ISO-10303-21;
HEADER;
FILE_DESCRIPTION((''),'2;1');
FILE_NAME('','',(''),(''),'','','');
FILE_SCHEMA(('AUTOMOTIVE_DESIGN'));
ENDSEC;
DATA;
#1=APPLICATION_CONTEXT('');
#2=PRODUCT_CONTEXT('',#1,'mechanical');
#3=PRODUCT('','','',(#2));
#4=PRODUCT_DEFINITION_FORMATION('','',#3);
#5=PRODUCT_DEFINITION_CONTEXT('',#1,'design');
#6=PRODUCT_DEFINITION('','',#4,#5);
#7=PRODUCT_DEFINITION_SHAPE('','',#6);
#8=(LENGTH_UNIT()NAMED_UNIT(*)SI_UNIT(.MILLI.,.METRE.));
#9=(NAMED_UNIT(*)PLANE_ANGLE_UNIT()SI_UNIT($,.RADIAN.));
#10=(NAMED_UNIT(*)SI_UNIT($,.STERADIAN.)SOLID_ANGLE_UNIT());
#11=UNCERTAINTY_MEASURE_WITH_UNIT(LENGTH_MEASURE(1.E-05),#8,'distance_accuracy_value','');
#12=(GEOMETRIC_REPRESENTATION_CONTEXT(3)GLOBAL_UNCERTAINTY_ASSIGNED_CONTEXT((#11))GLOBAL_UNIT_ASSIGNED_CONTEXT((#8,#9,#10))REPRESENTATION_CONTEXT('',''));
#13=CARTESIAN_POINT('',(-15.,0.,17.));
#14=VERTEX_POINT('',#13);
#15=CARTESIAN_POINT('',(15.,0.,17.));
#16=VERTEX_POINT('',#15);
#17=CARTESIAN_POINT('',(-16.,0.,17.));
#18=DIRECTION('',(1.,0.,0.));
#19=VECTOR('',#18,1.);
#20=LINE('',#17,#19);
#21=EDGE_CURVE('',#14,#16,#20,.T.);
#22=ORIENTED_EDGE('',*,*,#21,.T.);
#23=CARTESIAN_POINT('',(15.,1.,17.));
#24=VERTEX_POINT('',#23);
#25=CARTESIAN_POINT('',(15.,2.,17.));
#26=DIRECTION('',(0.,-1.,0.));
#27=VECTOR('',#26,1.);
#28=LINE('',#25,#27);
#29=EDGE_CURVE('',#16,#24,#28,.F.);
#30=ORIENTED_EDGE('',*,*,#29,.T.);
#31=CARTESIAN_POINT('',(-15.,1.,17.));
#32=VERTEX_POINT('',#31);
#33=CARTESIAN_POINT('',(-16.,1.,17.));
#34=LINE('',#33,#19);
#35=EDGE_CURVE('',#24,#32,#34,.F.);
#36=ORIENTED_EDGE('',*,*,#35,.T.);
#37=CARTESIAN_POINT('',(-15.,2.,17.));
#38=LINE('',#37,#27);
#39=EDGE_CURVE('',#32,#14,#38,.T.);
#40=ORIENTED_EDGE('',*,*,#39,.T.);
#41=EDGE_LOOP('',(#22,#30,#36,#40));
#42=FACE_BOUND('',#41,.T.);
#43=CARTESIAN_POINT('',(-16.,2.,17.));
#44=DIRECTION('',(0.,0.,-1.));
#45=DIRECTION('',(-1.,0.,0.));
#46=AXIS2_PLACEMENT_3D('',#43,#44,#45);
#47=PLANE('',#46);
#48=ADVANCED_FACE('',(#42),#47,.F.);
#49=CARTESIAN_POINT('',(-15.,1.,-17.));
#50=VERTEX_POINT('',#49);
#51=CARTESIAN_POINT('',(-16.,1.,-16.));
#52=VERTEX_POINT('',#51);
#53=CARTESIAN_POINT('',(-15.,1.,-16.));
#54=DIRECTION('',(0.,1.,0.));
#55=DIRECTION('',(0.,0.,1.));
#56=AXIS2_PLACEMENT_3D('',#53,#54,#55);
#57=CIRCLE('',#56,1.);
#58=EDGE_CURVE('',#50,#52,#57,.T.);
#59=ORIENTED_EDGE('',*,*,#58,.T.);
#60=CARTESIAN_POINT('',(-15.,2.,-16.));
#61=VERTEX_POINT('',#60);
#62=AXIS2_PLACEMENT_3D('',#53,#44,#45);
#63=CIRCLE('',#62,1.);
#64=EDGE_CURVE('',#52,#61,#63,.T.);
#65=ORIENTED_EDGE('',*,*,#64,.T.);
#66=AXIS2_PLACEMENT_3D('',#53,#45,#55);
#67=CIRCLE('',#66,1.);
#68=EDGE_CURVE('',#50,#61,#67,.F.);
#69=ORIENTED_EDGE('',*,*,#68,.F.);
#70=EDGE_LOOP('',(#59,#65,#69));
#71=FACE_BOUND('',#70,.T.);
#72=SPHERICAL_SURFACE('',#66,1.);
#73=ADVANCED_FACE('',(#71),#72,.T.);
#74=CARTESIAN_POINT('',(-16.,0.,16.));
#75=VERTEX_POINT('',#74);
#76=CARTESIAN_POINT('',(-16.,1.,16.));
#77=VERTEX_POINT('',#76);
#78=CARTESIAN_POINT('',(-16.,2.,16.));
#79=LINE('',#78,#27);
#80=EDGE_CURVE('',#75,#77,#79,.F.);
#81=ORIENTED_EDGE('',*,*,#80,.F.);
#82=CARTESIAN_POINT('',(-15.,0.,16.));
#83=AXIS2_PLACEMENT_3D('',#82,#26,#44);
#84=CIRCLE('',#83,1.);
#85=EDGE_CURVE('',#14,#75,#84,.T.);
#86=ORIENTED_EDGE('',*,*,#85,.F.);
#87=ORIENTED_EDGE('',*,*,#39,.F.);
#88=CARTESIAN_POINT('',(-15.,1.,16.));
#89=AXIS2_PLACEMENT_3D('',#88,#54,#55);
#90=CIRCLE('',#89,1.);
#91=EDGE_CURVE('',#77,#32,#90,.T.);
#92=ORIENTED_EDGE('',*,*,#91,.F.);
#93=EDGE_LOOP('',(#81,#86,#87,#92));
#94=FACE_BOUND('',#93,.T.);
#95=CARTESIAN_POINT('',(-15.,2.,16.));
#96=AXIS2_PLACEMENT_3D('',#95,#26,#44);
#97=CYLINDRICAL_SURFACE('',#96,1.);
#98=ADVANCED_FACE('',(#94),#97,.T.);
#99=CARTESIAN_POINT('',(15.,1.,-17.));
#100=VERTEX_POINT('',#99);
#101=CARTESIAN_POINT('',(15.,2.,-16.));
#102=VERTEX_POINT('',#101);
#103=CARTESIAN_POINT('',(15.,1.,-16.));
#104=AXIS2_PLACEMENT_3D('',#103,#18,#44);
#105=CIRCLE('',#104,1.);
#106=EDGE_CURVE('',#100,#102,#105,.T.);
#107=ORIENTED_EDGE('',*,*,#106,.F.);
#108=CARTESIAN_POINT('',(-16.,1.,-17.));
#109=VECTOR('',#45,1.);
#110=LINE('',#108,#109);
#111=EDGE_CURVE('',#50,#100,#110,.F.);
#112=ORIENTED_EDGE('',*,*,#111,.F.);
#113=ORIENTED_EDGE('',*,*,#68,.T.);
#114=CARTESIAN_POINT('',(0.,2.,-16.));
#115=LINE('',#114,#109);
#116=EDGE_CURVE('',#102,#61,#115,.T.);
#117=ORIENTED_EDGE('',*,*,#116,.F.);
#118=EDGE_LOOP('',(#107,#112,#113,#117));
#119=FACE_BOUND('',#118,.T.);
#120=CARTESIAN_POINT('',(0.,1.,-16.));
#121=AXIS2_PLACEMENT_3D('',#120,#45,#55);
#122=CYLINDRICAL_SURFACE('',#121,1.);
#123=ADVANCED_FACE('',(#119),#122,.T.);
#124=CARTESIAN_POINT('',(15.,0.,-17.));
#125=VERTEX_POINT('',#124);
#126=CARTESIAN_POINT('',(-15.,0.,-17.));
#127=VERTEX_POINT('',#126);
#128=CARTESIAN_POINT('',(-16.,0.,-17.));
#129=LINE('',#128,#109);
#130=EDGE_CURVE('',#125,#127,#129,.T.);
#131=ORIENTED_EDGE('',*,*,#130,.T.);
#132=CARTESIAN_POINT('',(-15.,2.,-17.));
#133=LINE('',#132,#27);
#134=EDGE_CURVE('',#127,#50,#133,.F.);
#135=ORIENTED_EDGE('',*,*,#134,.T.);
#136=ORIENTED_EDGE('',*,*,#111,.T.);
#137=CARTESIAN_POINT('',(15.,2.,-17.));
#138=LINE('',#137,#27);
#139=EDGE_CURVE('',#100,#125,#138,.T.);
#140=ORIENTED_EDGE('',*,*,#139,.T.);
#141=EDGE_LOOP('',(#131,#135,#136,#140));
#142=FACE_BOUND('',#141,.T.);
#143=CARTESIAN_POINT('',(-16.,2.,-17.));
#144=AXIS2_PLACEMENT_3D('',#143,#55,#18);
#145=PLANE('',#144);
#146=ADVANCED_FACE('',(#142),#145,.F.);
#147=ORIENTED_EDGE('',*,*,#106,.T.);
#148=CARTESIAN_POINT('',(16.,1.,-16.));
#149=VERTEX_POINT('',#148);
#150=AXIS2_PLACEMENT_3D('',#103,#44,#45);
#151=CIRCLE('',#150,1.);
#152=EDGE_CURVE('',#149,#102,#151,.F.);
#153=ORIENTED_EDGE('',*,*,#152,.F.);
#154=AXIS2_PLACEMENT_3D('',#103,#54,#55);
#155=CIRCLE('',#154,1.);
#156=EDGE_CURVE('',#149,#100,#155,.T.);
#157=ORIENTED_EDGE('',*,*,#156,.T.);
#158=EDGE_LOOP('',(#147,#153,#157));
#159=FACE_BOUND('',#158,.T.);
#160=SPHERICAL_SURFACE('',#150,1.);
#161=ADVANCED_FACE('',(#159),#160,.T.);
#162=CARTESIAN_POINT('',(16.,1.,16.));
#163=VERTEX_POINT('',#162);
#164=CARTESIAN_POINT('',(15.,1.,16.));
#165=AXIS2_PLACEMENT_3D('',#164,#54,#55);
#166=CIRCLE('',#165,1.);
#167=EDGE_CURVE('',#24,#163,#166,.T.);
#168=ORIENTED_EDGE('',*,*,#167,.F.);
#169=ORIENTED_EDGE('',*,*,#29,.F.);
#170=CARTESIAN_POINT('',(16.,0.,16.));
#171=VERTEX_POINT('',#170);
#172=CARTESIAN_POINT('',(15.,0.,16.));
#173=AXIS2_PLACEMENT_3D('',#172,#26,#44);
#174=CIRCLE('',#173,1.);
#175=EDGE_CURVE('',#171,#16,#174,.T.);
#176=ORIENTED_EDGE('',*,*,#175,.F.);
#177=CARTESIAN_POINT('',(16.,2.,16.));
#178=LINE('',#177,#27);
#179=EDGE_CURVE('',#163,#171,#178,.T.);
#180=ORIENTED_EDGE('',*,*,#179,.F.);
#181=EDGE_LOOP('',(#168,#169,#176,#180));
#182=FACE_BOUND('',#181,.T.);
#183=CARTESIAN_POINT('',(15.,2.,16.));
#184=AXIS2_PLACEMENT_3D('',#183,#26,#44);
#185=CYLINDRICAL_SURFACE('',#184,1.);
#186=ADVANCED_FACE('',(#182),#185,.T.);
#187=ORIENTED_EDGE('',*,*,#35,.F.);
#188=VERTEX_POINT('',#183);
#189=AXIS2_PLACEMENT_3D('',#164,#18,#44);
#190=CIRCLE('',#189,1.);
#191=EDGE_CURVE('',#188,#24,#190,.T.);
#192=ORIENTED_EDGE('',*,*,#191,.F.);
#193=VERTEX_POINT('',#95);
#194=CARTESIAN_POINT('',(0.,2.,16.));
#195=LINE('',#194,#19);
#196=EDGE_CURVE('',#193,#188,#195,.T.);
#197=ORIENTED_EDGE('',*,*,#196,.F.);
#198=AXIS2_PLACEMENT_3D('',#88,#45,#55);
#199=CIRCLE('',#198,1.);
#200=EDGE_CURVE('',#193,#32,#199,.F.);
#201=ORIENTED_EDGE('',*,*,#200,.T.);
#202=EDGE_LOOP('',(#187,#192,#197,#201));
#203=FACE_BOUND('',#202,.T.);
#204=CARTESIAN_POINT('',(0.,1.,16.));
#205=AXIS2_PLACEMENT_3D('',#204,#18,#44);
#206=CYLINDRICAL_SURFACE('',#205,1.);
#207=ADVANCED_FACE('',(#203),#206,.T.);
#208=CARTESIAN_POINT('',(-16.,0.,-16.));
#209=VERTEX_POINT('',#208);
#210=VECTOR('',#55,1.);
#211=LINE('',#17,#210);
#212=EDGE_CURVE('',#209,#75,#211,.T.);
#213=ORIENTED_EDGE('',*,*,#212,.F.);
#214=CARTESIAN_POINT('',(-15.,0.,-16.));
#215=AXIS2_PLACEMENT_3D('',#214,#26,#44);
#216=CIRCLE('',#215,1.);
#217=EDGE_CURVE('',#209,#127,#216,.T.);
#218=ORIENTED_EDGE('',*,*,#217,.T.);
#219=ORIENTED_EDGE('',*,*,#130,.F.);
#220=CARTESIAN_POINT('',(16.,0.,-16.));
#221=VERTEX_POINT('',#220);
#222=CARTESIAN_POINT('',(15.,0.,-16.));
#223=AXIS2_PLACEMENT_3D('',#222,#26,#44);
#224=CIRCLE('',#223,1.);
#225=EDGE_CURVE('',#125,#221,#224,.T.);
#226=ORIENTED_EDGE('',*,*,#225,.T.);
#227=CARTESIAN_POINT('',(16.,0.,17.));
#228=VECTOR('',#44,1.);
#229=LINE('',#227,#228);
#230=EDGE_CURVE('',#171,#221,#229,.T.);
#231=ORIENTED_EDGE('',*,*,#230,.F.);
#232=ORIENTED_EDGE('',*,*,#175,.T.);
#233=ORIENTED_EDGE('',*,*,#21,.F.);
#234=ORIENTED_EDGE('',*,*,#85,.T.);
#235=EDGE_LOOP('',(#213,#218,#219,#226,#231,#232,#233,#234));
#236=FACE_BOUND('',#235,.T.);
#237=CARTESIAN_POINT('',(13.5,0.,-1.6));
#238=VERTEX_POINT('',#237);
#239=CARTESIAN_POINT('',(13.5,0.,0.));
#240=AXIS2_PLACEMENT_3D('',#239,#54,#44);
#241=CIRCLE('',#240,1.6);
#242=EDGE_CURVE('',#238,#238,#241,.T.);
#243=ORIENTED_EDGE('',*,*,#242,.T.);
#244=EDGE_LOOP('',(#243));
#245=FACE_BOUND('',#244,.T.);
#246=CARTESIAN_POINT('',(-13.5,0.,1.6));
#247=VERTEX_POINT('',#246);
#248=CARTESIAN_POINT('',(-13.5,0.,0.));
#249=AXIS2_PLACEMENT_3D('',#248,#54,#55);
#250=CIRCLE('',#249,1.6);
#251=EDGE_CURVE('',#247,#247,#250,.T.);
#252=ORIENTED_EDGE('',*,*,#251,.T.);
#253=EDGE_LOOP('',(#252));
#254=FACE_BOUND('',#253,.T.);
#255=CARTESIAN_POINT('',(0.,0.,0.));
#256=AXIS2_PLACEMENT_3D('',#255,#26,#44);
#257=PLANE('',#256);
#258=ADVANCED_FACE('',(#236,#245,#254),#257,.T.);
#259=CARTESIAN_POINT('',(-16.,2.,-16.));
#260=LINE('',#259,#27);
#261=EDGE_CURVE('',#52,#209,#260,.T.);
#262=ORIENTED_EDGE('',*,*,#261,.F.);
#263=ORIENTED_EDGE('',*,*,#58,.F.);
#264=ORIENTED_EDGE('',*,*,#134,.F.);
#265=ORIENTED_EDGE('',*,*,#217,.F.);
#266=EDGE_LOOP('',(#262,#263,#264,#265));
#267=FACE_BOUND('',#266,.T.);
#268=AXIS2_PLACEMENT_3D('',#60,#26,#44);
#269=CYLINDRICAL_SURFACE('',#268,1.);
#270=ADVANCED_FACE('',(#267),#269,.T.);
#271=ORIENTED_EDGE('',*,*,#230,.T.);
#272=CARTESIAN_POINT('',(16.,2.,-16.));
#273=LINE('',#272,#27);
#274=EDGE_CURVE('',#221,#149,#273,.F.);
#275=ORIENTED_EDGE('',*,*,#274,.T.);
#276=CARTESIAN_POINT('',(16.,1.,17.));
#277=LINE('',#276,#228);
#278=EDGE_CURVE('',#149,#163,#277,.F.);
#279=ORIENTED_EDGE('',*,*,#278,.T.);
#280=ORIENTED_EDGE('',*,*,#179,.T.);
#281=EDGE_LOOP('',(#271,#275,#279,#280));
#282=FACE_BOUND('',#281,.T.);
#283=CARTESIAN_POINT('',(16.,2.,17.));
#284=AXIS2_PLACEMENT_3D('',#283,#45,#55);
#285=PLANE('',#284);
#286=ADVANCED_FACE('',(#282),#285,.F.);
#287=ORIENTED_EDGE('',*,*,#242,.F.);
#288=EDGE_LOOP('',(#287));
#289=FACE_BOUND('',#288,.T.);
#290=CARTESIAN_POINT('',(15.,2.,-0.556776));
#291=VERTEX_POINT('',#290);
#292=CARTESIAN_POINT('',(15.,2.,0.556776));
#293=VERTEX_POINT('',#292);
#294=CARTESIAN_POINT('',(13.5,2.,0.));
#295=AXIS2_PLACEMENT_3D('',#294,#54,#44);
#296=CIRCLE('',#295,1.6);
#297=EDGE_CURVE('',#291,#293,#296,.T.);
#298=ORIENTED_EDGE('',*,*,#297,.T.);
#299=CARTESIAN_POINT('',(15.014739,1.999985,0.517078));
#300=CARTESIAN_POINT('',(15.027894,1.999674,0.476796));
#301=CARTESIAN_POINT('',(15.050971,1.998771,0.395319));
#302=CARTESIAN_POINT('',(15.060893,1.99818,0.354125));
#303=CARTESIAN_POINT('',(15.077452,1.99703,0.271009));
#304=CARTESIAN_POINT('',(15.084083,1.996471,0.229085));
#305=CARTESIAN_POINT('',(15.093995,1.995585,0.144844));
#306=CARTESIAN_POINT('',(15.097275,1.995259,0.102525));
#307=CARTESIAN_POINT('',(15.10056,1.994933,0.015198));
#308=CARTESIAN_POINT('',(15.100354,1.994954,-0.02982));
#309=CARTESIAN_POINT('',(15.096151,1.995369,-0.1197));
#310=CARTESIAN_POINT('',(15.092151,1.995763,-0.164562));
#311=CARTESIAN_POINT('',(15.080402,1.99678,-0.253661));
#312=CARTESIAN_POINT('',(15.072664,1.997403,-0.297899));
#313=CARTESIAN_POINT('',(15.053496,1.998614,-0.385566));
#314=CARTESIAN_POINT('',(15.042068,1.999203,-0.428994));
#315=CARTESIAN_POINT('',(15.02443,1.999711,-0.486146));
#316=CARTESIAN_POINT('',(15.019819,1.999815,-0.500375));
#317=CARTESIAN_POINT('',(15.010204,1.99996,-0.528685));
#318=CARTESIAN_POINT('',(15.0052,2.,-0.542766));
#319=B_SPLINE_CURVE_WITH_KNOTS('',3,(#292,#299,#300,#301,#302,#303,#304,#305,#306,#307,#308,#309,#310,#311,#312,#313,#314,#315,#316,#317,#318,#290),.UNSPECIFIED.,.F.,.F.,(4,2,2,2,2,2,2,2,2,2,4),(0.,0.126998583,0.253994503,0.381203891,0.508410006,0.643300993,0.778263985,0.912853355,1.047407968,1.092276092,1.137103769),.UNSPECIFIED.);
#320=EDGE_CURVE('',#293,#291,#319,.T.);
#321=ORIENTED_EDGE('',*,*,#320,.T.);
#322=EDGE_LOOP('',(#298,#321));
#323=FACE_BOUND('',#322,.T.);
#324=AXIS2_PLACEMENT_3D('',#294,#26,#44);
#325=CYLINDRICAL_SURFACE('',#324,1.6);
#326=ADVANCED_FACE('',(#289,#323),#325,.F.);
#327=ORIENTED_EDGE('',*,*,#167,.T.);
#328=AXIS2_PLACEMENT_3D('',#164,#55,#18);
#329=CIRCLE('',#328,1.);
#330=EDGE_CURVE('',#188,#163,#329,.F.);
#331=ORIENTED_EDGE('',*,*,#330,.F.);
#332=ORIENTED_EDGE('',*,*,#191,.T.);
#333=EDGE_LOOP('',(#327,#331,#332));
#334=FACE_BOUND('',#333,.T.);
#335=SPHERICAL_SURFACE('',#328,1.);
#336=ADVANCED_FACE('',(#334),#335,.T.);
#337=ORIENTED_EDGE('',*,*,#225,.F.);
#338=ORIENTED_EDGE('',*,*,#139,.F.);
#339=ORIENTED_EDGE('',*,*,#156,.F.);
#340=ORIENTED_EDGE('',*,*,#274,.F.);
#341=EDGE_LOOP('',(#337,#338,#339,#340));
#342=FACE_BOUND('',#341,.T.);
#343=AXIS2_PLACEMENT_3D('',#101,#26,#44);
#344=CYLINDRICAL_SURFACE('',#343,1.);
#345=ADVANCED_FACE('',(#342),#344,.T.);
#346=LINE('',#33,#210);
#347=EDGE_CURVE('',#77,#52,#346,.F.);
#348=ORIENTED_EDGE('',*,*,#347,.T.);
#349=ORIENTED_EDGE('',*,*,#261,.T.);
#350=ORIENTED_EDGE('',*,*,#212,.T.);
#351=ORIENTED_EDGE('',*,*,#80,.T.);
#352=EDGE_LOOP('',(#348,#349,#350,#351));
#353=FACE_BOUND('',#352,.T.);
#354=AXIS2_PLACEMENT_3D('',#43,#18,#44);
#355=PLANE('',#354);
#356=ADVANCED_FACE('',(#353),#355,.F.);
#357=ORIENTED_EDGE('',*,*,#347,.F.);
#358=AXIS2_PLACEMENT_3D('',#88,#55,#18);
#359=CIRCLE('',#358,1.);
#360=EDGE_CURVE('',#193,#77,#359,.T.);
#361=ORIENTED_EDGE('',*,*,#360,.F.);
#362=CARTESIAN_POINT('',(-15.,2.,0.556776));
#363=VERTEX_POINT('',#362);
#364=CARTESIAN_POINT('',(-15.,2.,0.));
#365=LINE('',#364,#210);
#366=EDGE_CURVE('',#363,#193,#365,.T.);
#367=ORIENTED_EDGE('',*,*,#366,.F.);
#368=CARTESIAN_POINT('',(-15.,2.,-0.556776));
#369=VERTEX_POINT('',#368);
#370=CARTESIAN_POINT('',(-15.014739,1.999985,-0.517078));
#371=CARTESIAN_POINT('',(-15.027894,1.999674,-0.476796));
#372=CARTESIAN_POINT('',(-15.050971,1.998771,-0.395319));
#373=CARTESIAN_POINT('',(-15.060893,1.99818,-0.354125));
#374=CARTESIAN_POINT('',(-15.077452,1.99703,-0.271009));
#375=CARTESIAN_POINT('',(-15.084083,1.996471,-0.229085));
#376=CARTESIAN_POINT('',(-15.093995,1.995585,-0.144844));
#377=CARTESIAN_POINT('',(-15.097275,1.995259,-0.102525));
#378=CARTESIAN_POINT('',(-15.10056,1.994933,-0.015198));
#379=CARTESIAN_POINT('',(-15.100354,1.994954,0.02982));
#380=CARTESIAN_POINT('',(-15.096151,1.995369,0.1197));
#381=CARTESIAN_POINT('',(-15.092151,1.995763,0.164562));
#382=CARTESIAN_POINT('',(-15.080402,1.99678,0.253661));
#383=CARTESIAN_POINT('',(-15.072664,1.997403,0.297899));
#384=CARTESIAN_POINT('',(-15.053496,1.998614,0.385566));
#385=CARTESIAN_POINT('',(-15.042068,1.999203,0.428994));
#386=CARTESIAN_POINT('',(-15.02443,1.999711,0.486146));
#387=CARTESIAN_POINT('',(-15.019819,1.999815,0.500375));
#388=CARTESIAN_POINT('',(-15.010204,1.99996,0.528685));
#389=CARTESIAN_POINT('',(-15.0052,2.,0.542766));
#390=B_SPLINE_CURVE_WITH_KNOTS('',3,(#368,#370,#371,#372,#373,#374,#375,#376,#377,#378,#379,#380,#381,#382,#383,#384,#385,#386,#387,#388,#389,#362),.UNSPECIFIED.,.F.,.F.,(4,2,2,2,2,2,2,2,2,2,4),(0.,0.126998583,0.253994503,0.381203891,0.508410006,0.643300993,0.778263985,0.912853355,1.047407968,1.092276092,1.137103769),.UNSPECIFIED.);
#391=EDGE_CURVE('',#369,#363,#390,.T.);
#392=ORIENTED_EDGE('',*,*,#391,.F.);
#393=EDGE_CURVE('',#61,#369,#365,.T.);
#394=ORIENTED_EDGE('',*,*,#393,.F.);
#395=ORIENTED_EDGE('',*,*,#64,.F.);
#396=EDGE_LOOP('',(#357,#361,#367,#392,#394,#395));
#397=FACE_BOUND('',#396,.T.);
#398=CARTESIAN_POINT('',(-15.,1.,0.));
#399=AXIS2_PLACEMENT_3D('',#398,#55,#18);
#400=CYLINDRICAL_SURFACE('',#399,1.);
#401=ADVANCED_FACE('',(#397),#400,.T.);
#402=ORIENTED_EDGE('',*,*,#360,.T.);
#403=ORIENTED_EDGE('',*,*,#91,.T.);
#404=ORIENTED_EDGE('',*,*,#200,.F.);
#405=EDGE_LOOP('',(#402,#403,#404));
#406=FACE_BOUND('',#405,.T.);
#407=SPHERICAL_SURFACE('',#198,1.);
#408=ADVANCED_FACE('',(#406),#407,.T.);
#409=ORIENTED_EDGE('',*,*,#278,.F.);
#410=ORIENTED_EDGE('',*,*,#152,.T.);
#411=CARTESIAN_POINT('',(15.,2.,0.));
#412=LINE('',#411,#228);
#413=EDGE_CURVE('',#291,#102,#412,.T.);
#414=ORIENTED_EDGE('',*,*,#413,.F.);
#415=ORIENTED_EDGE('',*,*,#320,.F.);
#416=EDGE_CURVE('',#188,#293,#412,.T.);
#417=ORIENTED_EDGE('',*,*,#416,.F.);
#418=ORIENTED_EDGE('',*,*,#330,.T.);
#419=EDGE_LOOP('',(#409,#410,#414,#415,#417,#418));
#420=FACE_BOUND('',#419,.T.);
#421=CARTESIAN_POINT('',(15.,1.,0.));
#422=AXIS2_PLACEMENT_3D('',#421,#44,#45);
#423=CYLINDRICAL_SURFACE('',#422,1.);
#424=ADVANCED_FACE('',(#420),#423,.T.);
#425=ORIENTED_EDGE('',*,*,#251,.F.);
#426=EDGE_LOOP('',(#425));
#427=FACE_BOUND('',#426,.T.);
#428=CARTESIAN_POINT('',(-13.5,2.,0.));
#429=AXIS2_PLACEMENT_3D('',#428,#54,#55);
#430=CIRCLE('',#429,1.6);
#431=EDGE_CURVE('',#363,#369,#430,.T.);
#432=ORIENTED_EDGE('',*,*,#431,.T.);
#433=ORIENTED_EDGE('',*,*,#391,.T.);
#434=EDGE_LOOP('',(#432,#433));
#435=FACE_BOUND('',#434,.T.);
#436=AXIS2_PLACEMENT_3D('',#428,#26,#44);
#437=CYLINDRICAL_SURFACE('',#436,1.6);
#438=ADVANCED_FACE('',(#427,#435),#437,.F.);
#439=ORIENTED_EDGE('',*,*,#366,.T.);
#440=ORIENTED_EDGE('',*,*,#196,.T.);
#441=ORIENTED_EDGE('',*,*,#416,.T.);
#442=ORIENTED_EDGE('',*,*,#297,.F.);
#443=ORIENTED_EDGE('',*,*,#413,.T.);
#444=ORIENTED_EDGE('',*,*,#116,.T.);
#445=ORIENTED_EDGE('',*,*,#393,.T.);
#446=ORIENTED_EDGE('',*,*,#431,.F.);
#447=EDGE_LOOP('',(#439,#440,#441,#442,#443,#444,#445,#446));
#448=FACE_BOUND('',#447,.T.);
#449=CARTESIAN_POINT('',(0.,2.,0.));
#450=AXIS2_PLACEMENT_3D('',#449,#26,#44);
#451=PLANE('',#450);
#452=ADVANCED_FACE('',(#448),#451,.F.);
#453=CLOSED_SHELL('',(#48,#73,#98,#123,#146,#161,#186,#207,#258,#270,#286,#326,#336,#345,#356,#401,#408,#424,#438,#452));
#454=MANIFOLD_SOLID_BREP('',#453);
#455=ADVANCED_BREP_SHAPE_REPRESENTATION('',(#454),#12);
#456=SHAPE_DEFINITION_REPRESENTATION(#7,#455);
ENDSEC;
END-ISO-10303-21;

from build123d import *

# Parameters (mm, degrees)
SKETCH2_W           = 32
SKETCH2_H           = 34
SKETCH2_R           = 1.6
BOSS_EXTRUDE1_DEPTH = 2
FILLET1_R           = 1


with BuildPart() as part:
    # Sketch2 → Boss-Extrude1 (new body)
    with BuildSketch(Plane(origin=(0, 0, 0), x_dir=(1, 0, 0), z_dir=(0, 1, 0))):
        Rectangle(SKETCH2_W, SKETCH2_H)
        with Locations(Location((-13.5, 0, 0), (0, 0, 270))):
            Circle(SKETCH2_R, mode=Mode.SUBTRACT)
        with Locations(Location((13.5, 0, 0), (0, 0, 90))):
            Circle(SKETCH2_R, mode=Mode.SUBTRACT)
    extrude(amount=BOSS_EXTRUDE1_DEPTH)

    # Fillet1
    # the kernel refuses this fillet: 1 mm, written as the material it takes off along each edge
    with BuildSketch(Plane(origin=(-15, 1, -16), x_dir=(-1, 0, 0), z_dir=(0, 0, -1))) as fillet1_piece_1_section:
        Polygon((0, 0), (FILLET1_R, 0), (FILLET1_R, FILLET1_R), (0, FILLET1_R), align=None)
    fillet1_piece_1 = extrude(amount=FILLET1_R, mode=Mode.PRIVATE)
    fillet1_piece_1 = fillet1_piece_1 - Plane(origin=(-15, 1, -16), x_dir=(0.7071067811865475, -0.7071067811865475, 0), z_dir=(0, 0, -1)) * Sphere(FILLET1_R, mode=Mode.PRIVATE)
    add(fillet1_piece_1, mode=Mode.SUBTRACT)
    with BuildSketch(Plane(origin=(-15, 1, 16), x_dir=(-1, 0, 0), z_dir=(0, 0, 1))) as fillet1_piece_2_section:
        Polygon((0, 0), (FILLET1_R, 0), (FILLET1_R, -FILLET1_R), (0, -FILLET1_R), align=None)
    fillet1_piece_2 = extrude(amount=FILLET1_R, mode=Mode.PRIVATE)
    fillet1_piece_2 = fillet1_piece_2 - Plane(origin=(-15, 1, 16), x_dir=(0.7071067811865475, -0.7071067811865475, 0), z_dir=(0, 0, 1)) * Sphere(FILLET1_R, mode=Mode.PRIVATE)
    add(fillet1_piece_2, mode=Mode.SUBTRACT)
    with BuildSketch(Plane(origin=(15, 1, 16), x_dir=(1, 0, 0), z_dir=(0, 0, 1))) as fillet1_piece_3_section:
        Polygon((0, 0), (FILLET1_R, 0), (FILLET1_R, FILLET1_R), (0, FILLET1_R), align=None)
    fillet1_piece_3 = extrude(amount=FILLET1_R, mode=Mode.PRIVATE)
    fillet1_piece_3 = fillet1_piece_3 - Plane(origin=(15, 1, 16), x_dir=(-0.7071067811865475, -0.7071067811865475, 0), z_dir=(0, 0, 1)) * Sphere(FILLET1_R, mode=Mode.PRIVATE)
    add(fillet1_piece_3, mode=Mode.SUBTRACT)
    with BuildSketch(Plane(origin=(15, 1, -16), x_dir=(0, 0, -1), z_dir=(1, 0, 0))) as fillet1_piece_4_section:
        Polygon((0, 0), (FILLET1_R, 0), (FILLET1_R, FILLET1_R), (0, FILLET1_R), align=None)
    fillet1_piece_4 = extrude(amount=FILLET1_R, mode=Mode.PRIVATE)
    fillet1_piece_4 = fillet1_piece_4 - Plane(origin=(15, 1, -16), x_dir=(0, -0.7071067811865475, 0.7071067811865475), z_dir=(1, 0, 0)) * Sphere(FILLET1_R, mode=Mode.PRIVATE)
    add(fillet1_piece_4, mode=Mode.SUBTRACT)
    with BuildSketch(Plane(origin=(-16, 2, -16), x_dir=(0, -1, 0), z_dir=(0, 0, 1)), Plane(origin=(16, 2, 16), x_dir=(0, -1, 0), z_dir=(0, 0, -1))) as fillet1_piece_5:
        with BuildLine():
            CenterArc((FILLET1_R, FILLET1_R), FILLET1_R, 180, 90)
            Line((0, FILLET1_R), (0, 0))
            Line((0, 0), (FILLET1_R, 0))
        make_face()
    extrude(amount=32, mode=Mode.SUBTRACT)
    with BuildSketch(Plane(origin=(-15, 2, 17), x_dir=(0, -1, 0), z_dir=(1, 0, 0)), Plane(origin=(15, 2, -17), x_dir=(0, -1, 0), z_dir=(-1, 0, 0))) as fillet1_piece_6:
        with BuildLine():
            CenterArc((FILLET1_R, FILLET1_R), FILLET1_R, 180, 90)
            Line((0, FILLET1_R), (0, 0))
            Line((0, 0), (FILLET1_R, 0))
        make_face()
    extrude(amount=30, mode=Mode.SUBTRACT)
    with BuildSketch(Plane(origin=(16, -2.5, 17), x_dir=(-1, 0, 0), z_dir=(0, 1, 0)), Plane(origin=(-16, -2.5, -17), x_dir=(1, 0, 0), z_dir=(0, 1, 0)), Plane(origin=(16, -2.5, -17), x_dir=(0, 0, 1), z_dir=(0, 1, 0))) as fillet1_piece_7:
        with BuildLine():
            CenterArc((FILLET1_R, -FILLET1_R), FILLET1_R, 90, 90)
            Line((0, -FILLET1_R), (0, 0))
            Line((0, 0), (FILLET1_R, 0))
        make_face()
    extrude(amount=3.5, mode=Mode.SUBTRACT)
    with BuildSketch(Plane(origin=(-16, -2.5, 17), x_dir=(1, 0, 0), z_dir=(0, 1, 0))) as fillet1_piece_8:
        with BuildLine():
            CenterArc((FILLET1_R, FILLET1_R), FILLET1_R, 180, 90)
            Line((0, FILLET1_R), (0, 0))
            Line((0, 0), (FILLET1_R, 0))
        make_face()
    extrude(amount=3.5, mode=Mode.SUBTRACT)


solid = part.part
